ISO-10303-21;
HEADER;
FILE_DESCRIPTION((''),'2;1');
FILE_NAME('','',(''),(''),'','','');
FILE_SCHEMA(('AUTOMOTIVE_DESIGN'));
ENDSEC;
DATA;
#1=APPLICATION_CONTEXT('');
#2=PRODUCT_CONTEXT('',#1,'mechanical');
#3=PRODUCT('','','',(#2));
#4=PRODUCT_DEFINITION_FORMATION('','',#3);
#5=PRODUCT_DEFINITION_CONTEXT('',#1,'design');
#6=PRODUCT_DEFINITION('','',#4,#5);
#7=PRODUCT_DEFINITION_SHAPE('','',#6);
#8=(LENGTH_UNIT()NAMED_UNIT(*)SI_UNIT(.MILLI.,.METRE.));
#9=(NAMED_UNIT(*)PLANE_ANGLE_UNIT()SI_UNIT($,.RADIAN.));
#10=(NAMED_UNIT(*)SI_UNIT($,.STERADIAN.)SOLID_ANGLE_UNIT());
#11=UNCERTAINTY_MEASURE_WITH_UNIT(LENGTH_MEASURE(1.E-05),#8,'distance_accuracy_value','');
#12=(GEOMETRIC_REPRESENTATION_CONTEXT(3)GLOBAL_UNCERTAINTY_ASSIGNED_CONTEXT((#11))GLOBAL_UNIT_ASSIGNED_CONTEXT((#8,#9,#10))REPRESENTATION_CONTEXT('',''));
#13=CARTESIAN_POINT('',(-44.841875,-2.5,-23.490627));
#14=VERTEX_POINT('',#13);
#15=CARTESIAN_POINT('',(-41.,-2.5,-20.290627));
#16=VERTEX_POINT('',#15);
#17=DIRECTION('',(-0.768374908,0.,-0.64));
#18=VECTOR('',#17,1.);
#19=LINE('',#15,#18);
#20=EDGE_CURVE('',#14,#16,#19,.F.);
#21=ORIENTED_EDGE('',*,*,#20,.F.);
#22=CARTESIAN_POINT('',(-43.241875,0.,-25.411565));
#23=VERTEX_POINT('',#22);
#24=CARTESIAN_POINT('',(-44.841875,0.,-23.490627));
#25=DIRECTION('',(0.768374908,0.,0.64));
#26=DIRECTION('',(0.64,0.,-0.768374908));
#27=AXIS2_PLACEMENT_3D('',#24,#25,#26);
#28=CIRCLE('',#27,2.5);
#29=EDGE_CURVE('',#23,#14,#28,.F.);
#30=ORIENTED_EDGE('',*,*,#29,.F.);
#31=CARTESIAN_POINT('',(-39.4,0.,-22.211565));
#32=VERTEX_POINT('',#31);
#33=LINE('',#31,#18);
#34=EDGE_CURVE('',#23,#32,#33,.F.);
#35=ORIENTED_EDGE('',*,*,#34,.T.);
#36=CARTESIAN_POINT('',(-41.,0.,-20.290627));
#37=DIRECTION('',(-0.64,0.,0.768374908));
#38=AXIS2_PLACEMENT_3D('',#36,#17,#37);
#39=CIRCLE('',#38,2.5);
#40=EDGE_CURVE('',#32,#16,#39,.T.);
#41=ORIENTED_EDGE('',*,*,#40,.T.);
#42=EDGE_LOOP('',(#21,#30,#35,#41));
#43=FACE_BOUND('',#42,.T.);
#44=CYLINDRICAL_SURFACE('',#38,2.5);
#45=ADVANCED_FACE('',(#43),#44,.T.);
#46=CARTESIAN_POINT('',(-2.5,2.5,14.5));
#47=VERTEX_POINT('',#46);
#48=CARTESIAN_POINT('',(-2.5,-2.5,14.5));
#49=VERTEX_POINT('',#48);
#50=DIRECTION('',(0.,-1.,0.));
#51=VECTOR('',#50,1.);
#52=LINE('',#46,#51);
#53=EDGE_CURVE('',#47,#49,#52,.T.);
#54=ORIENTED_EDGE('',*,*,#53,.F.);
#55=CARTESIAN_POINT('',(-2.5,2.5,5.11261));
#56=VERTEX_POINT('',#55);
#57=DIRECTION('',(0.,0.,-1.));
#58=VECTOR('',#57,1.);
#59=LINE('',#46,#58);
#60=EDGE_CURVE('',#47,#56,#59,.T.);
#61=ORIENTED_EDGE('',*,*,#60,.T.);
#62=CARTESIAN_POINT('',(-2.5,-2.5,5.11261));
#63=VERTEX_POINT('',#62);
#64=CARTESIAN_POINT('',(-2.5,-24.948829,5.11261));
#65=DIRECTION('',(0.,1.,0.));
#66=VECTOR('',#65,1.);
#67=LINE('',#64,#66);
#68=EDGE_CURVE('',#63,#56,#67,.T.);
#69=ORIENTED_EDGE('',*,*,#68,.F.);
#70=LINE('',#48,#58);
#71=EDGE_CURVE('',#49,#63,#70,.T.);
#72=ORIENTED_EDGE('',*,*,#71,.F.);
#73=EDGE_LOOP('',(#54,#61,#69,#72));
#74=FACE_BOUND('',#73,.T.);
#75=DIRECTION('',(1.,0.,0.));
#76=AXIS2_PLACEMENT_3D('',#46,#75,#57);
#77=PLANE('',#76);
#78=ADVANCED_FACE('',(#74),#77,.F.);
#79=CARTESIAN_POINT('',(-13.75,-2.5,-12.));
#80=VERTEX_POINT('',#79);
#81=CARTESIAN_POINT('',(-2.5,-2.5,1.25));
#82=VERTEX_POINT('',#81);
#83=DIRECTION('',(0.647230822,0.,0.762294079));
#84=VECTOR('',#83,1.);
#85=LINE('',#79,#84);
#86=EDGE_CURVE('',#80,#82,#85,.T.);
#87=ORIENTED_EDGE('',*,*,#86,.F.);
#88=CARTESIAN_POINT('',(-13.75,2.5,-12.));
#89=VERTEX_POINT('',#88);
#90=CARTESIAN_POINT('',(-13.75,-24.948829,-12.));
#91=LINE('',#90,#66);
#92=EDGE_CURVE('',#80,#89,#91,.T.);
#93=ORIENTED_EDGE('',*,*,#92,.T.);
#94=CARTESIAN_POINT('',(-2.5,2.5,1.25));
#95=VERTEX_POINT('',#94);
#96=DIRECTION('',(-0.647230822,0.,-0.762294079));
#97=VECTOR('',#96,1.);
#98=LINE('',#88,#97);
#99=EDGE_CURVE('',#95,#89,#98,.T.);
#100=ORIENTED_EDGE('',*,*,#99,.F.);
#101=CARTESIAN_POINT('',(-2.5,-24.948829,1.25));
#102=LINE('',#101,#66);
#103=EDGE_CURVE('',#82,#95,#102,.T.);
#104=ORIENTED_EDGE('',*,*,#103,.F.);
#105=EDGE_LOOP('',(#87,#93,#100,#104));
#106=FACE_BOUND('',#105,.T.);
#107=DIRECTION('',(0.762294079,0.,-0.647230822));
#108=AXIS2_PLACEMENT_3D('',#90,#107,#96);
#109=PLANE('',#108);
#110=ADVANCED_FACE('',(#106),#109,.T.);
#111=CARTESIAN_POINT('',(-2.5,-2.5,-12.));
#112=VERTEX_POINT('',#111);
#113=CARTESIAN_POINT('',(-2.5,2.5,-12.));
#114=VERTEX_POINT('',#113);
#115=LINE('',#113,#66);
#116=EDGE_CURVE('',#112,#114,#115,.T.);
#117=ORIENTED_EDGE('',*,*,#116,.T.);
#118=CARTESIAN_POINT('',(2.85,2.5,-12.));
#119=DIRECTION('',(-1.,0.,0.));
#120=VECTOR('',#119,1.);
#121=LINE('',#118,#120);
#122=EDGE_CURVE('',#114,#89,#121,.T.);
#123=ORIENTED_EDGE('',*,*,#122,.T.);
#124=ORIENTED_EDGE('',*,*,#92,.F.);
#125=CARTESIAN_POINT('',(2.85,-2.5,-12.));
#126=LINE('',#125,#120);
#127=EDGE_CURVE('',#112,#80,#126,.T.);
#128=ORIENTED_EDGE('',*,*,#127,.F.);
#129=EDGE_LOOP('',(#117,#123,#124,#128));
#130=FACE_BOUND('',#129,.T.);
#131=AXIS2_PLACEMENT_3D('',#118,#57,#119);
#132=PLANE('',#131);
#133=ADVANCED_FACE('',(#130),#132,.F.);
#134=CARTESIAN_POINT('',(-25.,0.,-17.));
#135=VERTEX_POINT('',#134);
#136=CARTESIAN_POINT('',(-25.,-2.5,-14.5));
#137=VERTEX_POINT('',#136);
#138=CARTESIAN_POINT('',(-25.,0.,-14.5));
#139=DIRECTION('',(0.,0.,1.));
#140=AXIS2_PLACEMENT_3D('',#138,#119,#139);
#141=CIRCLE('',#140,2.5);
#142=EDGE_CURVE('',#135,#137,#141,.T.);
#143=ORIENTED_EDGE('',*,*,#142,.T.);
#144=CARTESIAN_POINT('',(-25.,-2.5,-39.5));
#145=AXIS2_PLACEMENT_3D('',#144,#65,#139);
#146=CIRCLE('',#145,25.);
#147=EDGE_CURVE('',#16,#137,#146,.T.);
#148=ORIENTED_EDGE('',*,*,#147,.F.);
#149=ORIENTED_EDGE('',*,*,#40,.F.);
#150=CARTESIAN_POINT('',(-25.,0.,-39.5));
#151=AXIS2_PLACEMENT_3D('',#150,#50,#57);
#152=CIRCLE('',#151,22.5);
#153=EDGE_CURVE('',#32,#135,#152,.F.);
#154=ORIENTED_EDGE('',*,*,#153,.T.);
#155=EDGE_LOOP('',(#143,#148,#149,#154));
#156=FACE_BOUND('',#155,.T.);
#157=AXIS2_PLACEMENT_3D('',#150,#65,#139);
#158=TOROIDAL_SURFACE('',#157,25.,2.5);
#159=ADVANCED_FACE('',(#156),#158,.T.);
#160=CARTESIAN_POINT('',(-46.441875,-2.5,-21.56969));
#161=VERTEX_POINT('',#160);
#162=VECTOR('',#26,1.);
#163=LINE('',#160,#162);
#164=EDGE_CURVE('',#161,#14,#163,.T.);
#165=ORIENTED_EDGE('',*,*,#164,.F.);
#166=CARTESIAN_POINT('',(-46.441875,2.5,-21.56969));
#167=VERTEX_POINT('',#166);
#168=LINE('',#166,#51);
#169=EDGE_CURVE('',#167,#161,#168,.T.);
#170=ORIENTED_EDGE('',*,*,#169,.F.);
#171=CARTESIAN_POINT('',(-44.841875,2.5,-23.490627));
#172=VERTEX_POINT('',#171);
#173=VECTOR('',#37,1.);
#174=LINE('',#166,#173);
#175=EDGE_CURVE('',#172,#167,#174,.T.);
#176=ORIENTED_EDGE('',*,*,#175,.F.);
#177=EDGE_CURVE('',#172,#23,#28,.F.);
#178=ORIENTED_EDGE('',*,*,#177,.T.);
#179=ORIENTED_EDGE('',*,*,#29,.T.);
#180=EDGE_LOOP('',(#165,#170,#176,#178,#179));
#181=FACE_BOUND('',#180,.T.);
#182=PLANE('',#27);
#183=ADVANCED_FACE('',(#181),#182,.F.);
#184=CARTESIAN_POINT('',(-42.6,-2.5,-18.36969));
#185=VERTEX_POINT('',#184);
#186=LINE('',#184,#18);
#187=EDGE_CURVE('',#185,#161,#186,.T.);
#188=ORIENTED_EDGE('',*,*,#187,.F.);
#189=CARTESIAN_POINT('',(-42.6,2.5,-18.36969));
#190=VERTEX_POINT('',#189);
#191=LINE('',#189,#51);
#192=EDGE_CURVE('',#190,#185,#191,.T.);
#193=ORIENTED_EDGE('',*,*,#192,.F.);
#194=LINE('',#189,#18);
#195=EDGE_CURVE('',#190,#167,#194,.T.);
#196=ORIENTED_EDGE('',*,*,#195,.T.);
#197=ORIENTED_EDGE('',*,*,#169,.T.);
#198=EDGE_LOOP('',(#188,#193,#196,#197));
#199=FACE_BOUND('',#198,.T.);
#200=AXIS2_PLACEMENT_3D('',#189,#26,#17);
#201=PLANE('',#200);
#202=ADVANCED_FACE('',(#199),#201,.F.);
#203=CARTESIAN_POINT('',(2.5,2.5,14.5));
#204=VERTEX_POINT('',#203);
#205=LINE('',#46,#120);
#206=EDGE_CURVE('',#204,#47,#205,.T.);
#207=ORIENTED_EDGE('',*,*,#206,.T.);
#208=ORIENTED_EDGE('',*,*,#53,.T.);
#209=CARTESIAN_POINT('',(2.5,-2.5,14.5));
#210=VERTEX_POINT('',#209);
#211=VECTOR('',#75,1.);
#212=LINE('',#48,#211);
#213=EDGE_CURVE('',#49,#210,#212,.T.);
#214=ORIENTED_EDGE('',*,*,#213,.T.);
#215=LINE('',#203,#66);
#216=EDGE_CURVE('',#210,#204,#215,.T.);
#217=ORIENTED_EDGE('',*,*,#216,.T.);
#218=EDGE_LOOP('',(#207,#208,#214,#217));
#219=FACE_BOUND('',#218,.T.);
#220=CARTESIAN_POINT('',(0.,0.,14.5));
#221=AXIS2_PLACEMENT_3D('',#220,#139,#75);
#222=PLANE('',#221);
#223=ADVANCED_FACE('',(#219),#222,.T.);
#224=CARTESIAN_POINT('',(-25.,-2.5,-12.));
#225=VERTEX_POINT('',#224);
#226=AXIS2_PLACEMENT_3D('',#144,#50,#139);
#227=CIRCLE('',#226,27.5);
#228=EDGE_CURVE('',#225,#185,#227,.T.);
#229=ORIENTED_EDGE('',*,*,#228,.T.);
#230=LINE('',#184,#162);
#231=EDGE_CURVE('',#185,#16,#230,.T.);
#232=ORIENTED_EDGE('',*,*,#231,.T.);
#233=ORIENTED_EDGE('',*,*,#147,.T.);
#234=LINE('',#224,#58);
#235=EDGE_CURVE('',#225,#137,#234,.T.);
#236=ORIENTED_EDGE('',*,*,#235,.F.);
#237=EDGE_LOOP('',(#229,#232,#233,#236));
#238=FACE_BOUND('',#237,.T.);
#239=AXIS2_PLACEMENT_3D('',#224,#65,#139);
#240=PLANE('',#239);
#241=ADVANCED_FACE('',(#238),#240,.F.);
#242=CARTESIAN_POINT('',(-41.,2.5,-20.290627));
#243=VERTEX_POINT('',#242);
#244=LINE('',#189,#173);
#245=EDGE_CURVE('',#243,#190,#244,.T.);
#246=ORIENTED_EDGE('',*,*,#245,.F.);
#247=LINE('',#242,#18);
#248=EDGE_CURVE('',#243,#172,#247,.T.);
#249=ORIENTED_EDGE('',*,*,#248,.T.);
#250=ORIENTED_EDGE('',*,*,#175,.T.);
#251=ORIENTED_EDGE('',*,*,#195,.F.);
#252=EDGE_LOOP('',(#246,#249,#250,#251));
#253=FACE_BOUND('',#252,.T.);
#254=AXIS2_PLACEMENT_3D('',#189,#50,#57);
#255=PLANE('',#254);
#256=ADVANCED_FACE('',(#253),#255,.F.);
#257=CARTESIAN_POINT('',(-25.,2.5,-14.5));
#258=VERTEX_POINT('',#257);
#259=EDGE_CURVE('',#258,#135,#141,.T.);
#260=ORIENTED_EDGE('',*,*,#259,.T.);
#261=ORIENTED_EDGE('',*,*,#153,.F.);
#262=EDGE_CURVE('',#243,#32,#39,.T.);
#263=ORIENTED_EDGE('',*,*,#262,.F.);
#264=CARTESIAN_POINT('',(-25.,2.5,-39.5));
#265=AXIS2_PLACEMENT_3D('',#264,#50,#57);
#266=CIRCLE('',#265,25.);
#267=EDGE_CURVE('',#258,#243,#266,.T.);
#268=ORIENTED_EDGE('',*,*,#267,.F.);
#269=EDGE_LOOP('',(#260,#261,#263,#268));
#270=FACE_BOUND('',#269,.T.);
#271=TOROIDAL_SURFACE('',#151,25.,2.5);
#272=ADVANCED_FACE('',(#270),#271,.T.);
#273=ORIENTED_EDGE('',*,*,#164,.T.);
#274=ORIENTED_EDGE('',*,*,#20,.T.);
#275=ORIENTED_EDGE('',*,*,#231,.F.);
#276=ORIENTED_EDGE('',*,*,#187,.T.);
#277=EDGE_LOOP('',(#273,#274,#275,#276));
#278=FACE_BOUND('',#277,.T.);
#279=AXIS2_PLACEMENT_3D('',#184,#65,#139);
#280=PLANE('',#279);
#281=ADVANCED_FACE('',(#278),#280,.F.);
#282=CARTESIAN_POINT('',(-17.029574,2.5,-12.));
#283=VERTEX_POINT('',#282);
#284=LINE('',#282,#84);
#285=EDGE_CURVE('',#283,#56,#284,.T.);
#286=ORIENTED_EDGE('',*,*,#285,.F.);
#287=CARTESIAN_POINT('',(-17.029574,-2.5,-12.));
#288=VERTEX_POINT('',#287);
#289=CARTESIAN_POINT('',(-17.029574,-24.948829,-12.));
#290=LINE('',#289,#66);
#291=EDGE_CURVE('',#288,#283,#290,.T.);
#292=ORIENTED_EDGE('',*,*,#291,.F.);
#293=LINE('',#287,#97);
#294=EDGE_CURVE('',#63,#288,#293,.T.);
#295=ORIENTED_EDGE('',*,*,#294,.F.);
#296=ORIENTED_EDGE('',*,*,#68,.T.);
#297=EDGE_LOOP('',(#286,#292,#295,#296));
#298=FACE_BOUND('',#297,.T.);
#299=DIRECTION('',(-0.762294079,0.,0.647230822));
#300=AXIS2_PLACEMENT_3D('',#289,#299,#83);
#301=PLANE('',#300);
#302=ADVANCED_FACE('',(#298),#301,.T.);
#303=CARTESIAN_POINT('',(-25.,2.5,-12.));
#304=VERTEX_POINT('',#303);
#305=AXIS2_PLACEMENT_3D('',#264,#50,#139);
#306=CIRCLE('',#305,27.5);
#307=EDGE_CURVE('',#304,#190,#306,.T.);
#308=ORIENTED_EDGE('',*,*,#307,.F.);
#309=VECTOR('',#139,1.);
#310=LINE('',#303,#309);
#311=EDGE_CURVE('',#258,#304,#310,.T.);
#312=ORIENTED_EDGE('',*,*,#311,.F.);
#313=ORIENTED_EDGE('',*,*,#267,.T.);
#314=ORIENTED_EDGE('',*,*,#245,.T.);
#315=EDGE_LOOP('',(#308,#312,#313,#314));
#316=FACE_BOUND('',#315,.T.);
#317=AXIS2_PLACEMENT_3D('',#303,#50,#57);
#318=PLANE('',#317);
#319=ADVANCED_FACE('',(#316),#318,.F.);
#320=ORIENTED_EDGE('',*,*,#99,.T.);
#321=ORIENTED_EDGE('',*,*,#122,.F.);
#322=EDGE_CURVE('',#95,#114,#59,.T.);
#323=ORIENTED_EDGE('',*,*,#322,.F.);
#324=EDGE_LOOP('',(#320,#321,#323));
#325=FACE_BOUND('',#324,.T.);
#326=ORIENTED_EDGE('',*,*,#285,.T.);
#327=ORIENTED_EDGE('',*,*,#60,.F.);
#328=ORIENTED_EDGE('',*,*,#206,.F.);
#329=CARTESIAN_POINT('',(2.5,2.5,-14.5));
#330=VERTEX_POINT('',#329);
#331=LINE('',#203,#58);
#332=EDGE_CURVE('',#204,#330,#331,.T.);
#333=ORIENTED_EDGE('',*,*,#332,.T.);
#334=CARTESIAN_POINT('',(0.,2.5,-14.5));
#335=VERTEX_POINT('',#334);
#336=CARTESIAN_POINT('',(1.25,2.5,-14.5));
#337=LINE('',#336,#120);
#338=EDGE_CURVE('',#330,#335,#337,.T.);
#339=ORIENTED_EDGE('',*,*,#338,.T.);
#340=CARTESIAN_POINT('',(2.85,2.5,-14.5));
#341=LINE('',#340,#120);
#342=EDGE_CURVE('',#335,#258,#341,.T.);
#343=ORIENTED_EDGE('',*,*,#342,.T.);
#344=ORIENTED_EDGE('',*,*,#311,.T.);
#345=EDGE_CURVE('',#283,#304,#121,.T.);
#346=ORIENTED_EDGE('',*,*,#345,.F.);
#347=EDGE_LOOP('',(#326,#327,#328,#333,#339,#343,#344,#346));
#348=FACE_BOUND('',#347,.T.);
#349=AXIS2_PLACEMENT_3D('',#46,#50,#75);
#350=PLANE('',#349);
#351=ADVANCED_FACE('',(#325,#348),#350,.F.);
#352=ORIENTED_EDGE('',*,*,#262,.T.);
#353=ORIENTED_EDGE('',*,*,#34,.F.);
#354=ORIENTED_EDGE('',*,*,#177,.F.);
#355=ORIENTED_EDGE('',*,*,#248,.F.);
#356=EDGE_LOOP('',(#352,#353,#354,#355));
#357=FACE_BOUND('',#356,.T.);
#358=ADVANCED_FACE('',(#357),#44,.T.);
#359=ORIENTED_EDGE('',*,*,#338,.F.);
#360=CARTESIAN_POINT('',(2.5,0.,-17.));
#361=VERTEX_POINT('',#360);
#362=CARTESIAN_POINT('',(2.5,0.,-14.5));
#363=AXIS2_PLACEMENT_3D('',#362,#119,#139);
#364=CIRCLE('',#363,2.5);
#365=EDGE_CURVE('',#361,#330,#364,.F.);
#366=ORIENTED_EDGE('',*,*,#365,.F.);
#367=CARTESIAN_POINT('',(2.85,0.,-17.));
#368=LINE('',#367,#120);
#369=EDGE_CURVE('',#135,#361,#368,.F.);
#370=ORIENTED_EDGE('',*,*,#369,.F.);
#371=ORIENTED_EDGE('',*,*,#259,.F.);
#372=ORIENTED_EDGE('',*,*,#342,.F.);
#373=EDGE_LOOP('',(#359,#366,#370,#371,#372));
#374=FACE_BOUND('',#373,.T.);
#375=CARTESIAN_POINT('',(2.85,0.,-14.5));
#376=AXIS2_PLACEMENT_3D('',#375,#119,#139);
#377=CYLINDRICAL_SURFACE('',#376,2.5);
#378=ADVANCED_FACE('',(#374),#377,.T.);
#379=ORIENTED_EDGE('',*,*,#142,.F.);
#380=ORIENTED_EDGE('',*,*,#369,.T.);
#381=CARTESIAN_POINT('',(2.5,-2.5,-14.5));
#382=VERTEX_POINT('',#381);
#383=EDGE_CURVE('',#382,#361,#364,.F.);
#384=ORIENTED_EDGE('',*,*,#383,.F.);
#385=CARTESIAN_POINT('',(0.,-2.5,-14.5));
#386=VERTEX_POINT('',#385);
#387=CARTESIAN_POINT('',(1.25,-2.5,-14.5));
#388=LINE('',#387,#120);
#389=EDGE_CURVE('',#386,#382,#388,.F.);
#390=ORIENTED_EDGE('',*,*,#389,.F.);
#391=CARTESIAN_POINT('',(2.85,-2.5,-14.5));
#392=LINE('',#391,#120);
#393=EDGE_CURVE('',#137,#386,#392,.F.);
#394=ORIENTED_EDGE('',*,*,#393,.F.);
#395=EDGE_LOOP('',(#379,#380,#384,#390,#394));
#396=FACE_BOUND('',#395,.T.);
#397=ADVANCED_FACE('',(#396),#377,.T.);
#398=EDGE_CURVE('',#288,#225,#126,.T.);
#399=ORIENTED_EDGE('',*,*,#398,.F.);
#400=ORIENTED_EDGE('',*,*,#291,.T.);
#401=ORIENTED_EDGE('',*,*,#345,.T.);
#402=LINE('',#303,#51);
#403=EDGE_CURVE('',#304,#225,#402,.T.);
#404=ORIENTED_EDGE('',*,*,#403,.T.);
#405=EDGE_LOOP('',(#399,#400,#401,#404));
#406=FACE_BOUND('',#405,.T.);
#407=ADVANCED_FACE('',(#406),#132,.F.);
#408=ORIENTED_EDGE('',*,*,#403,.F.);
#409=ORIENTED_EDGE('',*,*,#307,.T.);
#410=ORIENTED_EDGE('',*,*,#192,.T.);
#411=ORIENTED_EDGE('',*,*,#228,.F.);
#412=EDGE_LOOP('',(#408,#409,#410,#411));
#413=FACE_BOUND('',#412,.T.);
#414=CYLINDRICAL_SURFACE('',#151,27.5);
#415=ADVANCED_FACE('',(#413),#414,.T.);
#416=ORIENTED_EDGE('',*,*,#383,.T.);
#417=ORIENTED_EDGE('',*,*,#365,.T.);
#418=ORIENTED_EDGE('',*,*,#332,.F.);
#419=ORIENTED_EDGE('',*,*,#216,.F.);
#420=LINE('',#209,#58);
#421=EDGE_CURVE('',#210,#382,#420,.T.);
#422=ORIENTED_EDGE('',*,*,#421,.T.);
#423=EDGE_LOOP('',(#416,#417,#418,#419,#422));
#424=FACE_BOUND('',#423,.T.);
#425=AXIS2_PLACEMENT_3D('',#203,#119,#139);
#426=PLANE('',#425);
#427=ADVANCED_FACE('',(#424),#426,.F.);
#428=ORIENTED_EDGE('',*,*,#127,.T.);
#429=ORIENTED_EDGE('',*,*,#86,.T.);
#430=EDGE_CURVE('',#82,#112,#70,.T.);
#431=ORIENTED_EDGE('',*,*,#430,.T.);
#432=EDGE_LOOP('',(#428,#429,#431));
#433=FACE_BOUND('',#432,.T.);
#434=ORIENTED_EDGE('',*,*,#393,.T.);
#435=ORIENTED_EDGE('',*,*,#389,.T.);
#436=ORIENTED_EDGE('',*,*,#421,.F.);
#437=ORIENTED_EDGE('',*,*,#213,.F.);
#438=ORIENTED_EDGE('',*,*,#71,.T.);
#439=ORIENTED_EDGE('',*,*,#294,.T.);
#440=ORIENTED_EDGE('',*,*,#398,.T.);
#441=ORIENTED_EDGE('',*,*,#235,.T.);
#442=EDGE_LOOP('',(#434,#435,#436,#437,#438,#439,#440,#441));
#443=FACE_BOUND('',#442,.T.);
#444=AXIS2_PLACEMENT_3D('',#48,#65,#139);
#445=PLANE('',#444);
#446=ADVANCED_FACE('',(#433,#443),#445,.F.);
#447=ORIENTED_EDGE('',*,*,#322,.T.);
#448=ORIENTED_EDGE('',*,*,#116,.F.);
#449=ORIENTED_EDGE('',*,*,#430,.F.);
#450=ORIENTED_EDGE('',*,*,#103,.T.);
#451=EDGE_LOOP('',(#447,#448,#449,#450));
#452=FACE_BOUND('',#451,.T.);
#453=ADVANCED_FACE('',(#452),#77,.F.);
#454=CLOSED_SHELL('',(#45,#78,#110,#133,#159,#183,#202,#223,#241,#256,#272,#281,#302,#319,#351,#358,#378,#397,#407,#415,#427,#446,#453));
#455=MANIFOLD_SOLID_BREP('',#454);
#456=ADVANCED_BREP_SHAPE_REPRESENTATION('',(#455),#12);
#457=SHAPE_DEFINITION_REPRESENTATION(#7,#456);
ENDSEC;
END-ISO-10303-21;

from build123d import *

# Parameters (mm, degrees)
SKETCH2_W           = 5
SKETCH2_H           = 5
FILLET1_R           = 2.5
BOSS_EXTRUDE1_DEPTH = 5


with BuildPart() as part:
    # Sweep1: sweep along a path in Sketch1
    with BuildLine(Plane(origin=(0, 0, 0), x_dir=(1, 0, 0), z_dir=(0, 1, 0))) as sweep1_path:
        Line((0, -14.5), (0, 14.5))
        Line((0, 14.5), (-25, 14.5))
        ThreePointArc((-25, 14.5), (-33.507810594, 15.992189406), (-41, 20.290627288))
        Line((-41, 20.290627288), (-44.841874542, 23.490627288))
    # Sketch2 → Sweep1 (sweep)
    with BuildSketch(Plane.XY.offset(14.5)):
        Rectangle(SKETCH2_W, SKETCH2_H)
    sweep(path=sweep1_path.line, transition=Transition.RIGHT)

    # Fillet1
    fillet1_edges = [part.edges().sort_by_distance(p)[0] for p in [
        (-41.320937271, -2.5, -23.811564559),
        (-32.657029534, -2.5, -18.342970466),
        (-41.320937271, 2.5, -23.811564559),
        (-32.657029534, 2.5, -18.342970466),
        (-11.25, -2.5, -17),
        (-11.25, 2.5, -17),
    ]]
    fillet(fillet1_edges, radius=FILLET1_R - 0.0001)  # a hair under: the kernel refuses the full size

    # Sketch3 → Boss-Extrude1 (add)
    with BuildSketch(Plane(origin=(0, 2.5, 0), x_dir=(1, 0, 0), z_dir=(0, 1, 0))):
        Polygon((-17.029574207, 12), (-2.5, -5.112609621), (-2.5, -1.25), (-13.75, 12), align=None)
    extrude(amount=-BOSS_EXTRUDE1_DEPTH)


solid = part.part
